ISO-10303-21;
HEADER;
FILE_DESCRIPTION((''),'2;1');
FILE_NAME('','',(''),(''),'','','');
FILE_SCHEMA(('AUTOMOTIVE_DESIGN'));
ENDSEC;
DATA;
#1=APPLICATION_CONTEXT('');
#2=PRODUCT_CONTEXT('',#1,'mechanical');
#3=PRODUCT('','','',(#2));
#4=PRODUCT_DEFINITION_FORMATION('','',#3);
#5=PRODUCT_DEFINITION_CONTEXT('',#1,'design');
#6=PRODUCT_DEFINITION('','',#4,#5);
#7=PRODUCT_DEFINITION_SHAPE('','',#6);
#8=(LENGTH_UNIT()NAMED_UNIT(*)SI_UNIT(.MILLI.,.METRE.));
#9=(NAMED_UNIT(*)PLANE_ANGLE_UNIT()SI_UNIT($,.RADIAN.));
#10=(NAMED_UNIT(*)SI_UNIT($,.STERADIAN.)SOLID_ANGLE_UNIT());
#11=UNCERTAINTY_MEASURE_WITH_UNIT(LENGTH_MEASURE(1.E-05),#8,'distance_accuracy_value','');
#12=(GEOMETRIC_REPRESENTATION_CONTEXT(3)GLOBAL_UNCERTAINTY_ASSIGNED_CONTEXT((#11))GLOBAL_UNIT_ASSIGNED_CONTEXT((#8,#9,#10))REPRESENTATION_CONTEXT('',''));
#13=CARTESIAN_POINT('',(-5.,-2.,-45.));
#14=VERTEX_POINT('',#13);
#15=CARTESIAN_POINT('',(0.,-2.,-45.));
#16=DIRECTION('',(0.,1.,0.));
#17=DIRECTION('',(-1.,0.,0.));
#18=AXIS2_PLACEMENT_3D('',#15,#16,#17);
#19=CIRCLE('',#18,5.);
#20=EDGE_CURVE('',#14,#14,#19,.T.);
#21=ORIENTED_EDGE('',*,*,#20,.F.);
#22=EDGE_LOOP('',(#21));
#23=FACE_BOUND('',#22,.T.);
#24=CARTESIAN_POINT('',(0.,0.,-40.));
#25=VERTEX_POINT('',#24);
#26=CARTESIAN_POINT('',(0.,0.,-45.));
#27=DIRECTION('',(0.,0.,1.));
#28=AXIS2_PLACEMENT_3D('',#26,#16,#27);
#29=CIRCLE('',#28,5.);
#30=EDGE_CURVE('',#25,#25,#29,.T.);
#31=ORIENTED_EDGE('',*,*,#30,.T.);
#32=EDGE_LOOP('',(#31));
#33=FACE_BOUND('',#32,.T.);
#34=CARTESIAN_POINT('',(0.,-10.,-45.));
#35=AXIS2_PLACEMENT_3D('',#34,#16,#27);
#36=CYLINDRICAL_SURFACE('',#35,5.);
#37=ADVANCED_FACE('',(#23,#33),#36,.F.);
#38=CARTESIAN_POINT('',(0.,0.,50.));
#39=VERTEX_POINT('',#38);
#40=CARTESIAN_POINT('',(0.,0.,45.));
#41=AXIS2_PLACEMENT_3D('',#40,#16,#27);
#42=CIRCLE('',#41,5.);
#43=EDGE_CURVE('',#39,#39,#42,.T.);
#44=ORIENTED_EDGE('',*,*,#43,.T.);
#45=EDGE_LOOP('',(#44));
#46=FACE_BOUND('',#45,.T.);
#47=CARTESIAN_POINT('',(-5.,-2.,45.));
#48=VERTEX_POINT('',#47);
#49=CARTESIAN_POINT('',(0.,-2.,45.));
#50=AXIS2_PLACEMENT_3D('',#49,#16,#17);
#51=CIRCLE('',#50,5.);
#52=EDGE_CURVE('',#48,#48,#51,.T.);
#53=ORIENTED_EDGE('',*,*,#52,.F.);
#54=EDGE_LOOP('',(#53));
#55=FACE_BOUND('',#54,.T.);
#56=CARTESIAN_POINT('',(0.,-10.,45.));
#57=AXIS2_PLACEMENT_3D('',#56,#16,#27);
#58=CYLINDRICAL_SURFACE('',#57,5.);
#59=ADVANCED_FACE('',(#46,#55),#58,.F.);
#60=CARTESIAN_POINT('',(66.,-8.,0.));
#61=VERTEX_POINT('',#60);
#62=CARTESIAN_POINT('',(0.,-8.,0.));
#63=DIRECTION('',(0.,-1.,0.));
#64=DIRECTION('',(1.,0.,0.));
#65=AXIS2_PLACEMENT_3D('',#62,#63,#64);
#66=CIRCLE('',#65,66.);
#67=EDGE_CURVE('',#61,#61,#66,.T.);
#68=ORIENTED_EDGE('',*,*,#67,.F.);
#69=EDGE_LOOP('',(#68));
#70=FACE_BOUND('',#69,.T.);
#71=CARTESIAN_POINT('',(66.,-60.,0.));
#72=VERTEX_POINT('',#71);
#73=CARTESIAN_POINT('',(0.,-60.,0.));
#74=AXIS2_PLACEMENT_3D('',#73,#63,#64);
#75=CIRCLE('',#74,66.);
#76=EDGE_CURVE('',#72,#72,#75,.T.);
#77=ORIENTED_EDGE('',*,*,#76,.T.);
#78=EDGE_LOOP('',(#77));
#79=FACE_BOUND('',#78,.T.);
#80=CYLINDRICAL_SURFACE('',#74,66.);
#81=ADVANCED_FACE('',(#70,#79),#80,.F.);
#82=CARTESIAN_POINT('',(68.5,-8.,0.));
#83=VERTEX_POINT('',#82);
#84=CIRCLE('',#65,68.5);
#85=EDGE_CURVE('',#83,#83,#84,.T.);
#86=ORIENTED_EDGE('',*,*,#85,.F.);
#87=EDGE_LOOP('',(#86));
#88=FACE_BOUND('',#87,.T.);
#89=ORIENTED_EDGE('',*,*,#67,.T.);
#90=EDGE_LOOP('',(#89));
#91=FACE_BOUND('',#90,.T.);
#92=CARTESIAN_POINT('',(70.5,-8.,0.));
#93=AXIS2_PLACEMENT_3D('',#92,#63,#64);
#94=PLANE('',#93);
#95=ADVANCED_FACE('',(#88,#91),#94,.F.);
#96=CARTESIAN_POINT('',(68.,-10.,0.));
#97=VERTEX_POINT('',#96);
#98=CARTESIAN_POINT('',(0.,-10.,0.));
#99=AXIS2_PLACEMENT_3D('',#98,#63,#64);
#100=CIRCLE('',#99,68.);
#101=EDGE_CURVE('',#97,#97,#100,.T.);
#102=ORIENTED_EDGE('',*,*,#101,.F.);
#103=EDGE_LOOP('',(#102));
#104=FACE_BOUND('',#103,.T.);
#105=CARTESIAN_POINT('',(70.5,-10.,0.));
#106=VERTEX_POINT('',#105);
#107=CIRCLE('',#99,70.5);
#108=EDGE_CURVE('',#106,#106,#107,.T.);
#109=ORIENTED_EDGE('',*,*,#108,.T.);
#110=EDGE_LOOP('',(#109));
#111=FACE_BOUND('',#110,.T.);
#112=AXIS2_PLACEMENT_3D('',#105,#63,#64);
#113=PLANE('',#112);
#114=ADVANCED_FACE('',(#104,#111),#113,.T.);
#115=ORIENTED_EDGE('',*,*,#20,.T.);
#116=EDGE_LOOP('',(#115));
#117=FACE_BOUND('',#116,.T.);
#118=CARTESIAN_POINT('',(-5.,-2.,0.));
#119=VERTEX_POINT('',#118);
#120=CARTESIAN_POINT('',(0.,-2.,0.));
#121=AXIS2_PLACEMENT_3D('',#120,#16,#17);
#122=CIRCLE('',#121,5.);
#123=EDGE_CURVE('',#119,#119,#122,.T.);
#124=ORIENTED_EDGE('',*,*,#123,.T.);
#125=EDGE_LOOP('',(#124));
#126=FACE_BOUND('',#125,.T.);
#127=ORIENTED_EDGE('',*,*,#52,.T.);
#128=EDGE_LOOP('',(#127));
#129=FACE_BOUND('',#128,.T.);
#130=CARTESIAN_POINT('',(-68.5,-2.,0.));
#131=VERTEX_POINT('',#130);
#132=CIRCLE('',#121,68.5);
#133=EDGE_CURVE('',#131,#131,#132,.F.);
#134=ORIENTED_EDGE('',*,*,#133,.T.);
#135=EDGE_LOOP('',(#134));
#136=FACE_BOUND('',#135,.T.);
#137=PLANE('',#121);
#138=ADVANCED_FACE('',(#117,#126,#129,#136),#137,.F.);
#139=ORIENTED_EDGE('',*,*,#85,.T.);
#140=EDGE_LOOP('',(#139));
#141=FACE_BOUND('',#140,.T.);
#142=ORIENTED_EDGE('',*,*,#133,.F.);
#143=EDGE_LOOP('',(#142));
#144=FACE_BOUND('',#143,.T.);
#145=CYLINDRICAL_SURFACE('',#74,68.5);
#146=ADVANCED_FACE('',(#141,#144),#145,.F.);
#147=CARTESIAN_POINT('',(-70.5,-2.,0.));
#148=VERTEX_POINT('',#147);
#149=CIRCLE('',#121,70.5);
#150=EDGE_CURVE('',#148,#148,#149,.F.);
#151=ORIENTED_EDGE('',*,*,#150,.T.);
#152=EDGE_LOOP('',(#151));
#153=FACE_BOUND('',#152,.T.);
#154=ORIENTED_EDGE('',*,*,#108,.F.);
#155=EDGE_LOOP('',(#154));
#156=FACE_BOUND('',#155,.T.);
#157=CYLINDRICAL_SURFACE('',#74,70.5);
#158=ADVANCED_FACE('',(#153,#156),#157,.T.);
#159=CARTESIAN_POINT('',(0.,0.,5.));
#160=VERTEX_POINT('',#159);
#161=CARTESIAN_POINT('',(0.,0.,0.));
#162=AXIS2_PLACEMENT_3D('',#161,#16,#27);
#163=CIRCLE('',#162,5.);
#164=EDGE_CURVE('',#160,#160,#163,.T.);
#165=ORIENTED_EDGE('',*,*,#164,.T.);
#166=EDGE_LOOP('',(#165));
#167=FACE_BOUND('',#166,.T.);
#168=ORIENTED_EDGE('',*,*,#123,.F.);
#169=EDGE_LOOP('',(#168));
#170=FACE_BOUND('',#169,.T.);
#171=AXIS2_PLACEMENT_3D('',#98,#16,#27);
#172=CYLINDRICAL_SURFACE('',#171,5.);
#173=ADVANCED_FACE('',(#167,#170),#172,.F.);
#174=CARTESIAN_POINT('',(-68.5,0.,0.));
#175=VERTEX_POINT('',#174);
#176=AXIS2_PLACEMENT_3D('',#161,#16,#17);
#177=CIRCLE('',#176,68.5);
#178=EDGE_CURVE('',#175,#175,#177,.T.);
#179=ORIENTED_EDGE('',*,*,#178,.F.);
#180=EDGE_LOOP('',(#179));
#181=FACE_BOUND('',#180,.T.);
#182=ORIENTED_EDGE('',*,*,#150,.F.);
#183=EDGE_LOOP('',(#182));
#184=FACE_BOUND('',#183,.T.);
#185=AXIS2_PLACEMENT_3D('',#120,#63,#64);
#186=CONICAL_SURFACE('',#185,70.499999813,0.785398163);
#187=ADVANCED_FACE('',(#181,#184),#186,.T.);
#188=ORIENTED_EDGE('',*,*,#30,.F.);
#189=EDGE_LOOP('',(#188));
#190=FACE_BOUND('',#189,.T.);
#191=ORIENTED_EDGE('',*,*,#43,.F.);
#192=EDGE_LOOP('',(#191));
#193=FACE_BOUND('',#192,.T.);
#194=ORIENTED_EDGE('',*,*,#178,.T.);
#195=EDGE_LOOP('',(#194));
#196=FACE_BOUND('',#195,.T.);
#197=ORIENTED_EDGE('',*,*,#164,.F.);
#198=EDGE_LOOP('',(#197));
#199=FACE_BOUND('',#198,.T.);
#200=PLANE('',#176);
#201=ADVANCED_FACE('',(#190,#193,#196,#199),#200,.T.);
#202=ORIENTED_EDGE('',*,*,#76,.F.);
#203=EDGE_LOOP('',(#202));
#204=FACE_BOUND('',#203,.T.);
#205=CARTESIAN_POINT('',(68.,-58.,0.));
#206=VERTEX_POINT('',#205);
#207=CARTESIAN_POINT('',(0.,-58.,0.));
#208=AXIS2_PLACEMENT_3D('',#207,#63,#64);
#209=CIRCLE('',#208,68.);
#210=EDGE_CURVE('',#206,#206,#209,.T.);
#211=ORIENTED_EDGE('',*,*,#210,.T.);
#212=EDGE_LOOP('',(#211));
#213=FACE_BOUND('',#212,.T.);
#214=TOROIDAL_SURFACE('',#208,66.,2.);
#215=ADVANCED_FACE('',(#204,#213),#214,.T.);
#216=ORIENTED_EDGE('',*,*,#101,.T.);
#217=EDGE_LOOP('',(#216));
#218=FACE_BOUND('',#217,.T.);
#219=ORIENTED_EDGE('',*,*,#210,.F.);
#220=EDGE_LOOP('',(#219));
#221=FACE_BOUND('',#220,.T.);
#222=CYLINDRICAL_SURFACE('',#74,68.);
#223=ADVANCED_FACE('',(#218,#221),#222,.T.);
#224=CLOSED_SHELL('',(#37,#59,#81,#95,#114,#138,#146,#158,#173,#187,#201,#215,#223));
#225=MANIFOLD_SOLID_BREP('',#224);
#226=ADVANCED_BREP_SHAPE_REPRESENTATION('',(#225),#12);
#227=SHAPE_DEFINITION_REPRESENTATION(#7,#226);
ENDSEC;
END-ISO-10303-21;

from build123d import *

# Parameters (mm, degrees)
SVUOTA5_START            = -60
SVUOTA5_OUTLINE_R        = 66
SVUOTA5_DEPTH            = 58
SVUOTA5_START_2          = -8
SVUOTA5_2_OUTLINE_R      = 68.499999813
SVUOTA5_2_OUTLINE_R_2    = 66
SVUOTA5_2_DEPTH          = 6
SMUSSO1_SIZE             = 2
SCHIZZO3_R               = 5
TAGLIO_ESTRUSIONE1_DEPTH = 10
SCHIZZO4_R               = 5
TAGLIO_ESTRUSIONE2_DEPTH = 10


# Read off the part's stored shape, not the designer's step: Svuota5
with BuildPart() as part:
    # Schizzo1 → Rivoluzione3 (revolve)
    with BuildSketch(Plane.XY):
        with BuildLine():
            Line((0, 0), (0, -10))
            Line((0, -10), (0, -60))
            Line((0, -60), (66, -60))
            ThreePointArc((66, -60), (67.414213562, -59.414213562), (68, -58))
            Line((68, -58), (68, -10))
            Line((68, -10), (70.499999813, -10))
            Line((70.499999813, -10), (70.499999813, 0))
            Line((70.499999813, 0), (0, 0))
        make_face()
    revolve(axis=Axis((0, -60, 0), (0, 1, 0)))

    # Svuota5 outline → Svuota5 (cut)
    with BuildSketch(Plane(origin=(0, 0, 0), x_dir=(1, 0, 0), z_dir=(0, 1, 0)).offset(SVUOTA5_START)):
        Circle(SVUOTA5_OUTLINE_R)
    extrude(amount=SVUOTA5_DEPTH, mode=Mode.SUBTRACT)

    # Svuota5 2 outline → Svuota5 2 (cut)
    with BuildSketch(Plane(origin=(0, 0, 0), x_dir=(1, 0, 0), z_dir=(0, 1, 0)).offset(SVUOTA5_START_2)):
        Circle(SVUOTA5_2_OUTLINE_R)
        Circle(SVUOTA5_2_OUTLINE_R_2, mode=Mode.SUBTRACT)
    extrude(amount=SVUOTA5_2_DEPTH, mode=Mode.SUBTRACT)

    # Smusso1
    smusso1_edges = [part.edges().sort_by_distance(p)[0] for p in [
        (-70.499999813, 0, 0),
    ]]
    chamfer(smusso1_edges, length=SMUSSO1_SIZE)

    # Schizzo3 → Taglio-Estrusione1 (cut)
    with BuildSketch(Plane(origin=(0, 0, 0), x_dir=(1, 0, 0), z_dir=(0, 1, 0))):
        with Locations(Location((0, 0, 0), (0, 0, 270))):
            Circle(SCHIZZO3_R)
    extrude(amount=-TAGLIO_ESTRUSIONE1_DEPTH, mode=Mode.SUBTRACT)

    # Schizzo4 → Taglio-Estrusione2 (cut)
    with BuildSketch(Plane(origin=(0, 0, 0), x_dir=(1, 0, 0), z_dir=(0, 1, 0))):
        with Locations(Location((0, 45, 0), (0, 0, 270))):
            Circle(SCHIZZO4_R)
        with Locations(Location((0, -45, 0), (0, 0, 270))):
            Circle(SCHIZZO4_R)
    extrude(amount=-TAGLIO_ESTRUSIONE2_DEPTH, mode=Mode.SUBTRACT)


solid = part.part
